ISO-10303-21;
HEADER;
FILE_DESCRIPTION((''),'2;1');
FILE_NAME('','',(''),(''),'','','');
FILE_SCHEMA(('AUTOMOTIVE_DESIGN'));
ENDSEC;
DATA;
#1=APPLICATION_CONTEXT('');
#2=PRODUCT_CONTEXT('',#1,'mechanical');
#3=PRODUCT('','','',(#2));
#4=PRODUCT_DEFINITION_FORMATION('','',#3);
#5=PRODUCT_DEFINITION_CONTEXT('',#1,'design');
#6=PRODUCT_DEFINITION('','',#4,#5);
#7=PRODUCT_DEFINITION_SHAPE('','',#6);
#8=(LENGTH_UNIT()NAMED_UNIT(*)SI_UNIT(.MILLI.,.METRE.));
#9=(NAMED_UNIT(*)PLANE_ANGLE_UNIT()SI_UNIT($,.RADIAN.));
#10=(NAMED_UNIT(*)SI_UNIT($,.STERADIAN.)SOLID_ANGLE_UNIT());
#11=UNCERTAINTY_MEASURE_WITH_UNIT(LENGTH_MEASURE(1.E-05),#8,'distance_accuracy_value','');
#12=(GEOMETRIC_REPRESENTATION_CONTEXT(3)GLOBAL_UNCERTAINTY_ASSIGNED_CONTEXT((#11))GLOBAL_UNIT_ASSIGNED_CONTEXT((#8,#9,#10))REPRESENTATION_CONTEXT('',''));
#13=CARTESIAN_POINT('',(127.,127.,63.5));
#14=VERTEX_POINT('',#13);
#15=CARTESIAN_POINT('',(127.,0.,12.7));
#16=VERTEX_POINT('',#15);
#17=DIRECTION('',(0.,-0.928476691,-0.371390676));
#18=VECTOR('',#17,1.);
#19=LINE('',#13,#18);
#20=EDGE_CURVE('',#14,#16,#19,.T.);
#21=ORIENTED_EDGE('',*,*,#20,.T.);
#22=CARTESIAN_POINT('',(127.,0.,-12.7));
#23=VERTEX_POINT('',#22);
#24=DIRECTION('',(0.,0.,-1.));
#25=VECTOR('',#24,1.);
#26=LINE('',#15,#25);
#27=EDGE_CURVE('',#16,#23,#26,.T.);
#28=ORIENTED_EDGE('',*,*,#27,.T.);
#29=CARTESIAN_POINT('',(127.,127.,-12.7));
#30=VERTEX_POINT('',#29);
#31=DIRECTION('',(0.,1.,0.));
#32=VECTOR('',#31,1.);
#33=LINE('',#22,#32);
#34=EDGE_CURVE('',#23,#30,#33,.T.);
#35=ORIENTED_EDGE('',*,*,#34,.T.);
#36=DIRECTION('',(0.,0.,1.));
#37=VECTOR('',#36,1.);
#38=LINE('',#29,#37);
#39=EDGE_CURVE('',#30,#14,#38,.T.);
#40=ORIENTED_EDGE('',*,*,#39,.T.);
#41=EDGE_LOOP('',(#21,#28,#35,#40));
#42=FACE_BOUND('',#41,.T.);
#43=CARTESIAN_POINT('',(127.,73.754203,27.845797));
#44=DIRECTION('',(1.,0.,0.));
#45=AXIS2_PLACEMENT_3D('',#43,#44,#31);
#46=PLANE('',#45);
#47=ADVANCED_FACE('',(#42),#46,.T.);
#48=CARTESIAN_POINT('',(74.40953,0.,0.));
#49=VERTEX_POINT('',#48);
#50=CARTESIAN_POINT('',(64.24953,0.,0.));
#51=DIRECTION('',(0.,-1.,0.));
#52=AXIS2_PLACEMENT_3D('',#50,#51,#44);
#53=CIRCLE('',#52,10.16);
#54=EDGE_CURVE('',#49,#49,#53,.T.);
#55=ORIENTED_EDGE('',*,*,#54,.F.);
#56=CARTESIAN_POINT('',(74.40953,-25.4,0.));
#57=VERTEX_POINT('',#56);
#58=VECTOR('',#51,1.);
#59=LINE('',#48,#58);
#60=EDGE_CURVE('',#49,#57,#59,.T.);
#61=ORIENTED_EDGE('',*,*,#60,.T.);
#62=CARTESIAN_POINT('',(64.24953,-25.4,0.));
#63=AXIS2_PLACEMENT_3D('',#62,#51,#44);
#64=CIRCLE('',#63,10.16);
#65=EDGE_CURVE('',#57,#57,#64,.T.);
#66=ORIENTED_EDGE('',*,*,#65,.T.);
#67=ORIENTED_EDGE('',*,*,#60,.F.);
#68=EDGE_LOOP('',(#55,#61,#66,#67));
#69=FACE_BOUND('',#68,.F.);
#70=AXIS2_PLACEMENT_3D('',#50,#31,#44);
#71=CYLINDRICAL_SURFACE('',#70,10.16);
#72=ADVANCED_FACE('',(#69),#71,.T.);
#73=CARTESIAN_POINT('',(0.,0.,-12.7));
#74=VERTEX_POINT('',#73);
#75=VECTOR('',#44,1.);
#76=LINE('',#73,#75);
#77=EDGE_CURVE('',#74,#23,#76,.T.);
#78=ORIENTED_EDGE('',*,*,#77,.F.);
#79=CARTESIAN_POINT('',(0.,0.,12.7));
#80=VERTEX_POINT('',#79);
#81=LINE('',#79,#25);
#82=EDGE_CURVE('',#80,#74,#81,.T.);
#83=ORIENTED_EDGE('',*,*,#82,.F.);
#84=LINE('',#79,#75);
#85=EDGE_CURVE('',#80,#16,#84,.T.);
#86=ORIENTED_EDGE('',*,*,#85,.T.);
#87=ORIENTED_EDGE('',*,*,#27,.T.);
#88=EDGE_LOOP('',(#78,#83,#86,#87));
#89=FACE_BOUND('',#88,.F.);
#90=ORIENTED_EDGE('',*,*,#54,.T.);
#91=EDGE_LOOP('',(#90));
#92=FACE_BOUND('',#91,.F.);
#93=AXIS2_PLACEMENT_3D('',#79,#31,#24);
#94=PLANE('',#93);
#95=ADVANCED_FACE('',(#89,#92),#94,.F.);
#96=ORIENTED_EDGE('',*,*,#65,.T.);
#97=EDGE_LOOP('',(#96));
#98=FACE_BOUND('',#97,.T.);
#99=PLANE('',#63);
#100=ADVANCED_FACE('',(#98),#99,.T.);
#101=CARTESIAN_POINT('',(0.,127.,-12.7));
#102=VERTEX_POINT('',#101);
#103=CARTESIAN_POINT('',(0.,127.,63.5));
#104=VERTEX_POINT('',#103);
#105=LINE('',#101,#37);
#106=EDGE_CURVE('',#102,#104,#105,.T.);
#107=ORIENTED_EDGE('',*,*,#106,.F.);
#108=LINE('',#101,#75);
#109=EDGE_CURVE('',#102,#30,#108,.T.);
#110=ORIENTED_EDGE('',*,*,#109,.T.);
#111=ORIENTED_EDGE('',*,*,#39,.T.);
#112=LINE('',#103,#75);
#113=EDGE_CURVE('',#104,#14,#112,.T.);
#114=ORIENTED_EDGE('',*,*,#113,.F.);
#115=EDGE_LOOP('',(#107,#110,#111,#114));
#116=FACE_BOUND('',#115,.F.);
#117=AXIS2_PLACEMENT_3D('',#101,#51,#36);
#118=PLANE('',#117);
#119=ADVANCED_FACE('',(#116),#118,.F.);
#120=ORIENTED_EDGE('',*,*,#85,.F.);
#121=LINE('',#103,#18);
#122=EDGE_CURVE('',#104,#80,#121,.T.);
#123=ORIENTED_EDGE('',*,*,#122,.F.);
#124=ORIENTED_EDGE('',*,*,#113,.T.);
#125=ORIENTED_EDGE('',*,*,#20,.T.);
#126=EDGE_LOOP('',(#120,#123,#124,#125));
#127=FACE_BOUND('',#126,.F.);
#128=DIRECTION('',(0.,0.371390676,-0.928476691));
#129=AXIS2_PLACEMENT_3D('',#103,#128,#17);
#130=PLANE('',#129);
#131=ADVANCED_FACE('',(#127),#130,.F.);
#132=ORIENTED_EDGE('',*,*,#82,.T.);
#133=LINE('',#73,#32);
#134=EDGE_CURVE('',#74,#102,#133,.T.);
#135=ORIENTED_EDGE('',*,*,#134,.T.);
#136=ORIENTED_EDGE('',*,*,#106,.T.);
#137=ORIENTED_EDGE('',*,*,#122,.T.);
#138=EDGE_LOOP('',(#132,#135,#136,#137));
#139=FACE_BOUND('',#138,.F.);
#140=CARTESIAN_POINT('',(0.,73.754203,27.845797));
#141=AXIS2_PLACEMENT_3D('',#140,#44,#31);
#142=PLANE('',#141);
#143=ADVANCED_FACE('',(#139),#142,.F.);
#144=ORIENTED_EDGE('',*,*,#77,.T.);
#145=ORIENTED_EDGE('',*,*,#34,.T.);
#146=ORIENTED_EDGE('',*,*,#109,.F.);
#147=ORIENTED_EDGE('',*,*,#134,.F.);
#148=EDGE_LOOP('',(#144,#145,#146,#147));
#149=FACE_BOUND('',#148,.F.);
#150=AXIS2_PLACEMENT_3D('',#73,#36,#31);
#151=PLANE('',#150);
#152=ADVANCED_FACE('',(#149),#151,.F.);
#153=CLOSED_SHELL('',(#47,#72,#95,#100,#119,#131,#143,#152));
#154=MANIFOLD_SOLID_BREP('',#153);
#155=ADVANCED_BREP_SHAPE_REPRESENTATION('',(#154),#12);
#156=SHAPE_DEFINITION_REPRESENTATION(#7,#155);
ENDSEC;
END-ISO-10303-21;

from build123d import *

# Parameters (mm, degrees)
F0_W     = 114.1541988105
F0_H     = 25.4
F1_DEPTH = 127
F2_R     = 10.16
F3_DEPTH = 25.4


# Not quite as in the source:
# - a feature names something its author has since deleted; it is built from what else it names


with BuildPart() as f1:
    # F0 (on Right) → F1 (new body)
    with BuildSketch(Plane.YZ):
        Polygon((127, 63.5), (0, 12.7), (12.8458011895, 12.7), (127, 12.7), align=None)
        with Locations((69.9229005948, 0)):
            Rectangle(F0_W, F0_H)
        Polygon((12.8458011895, 12.7), (0, 12.7), (0, 0), (0, -12.7), (12.8458011895, -12.7), align=None)
    extrude(amount=F1_DEPTH)

    # F2 (on face) → F3 (join)
    with BuildSketch(Plane.XZ):
        with Locations((64.2495304346, 0)):
            Circle(F2_R)
    extrude(amount=F3_DEPTH)


solid = f1.part
